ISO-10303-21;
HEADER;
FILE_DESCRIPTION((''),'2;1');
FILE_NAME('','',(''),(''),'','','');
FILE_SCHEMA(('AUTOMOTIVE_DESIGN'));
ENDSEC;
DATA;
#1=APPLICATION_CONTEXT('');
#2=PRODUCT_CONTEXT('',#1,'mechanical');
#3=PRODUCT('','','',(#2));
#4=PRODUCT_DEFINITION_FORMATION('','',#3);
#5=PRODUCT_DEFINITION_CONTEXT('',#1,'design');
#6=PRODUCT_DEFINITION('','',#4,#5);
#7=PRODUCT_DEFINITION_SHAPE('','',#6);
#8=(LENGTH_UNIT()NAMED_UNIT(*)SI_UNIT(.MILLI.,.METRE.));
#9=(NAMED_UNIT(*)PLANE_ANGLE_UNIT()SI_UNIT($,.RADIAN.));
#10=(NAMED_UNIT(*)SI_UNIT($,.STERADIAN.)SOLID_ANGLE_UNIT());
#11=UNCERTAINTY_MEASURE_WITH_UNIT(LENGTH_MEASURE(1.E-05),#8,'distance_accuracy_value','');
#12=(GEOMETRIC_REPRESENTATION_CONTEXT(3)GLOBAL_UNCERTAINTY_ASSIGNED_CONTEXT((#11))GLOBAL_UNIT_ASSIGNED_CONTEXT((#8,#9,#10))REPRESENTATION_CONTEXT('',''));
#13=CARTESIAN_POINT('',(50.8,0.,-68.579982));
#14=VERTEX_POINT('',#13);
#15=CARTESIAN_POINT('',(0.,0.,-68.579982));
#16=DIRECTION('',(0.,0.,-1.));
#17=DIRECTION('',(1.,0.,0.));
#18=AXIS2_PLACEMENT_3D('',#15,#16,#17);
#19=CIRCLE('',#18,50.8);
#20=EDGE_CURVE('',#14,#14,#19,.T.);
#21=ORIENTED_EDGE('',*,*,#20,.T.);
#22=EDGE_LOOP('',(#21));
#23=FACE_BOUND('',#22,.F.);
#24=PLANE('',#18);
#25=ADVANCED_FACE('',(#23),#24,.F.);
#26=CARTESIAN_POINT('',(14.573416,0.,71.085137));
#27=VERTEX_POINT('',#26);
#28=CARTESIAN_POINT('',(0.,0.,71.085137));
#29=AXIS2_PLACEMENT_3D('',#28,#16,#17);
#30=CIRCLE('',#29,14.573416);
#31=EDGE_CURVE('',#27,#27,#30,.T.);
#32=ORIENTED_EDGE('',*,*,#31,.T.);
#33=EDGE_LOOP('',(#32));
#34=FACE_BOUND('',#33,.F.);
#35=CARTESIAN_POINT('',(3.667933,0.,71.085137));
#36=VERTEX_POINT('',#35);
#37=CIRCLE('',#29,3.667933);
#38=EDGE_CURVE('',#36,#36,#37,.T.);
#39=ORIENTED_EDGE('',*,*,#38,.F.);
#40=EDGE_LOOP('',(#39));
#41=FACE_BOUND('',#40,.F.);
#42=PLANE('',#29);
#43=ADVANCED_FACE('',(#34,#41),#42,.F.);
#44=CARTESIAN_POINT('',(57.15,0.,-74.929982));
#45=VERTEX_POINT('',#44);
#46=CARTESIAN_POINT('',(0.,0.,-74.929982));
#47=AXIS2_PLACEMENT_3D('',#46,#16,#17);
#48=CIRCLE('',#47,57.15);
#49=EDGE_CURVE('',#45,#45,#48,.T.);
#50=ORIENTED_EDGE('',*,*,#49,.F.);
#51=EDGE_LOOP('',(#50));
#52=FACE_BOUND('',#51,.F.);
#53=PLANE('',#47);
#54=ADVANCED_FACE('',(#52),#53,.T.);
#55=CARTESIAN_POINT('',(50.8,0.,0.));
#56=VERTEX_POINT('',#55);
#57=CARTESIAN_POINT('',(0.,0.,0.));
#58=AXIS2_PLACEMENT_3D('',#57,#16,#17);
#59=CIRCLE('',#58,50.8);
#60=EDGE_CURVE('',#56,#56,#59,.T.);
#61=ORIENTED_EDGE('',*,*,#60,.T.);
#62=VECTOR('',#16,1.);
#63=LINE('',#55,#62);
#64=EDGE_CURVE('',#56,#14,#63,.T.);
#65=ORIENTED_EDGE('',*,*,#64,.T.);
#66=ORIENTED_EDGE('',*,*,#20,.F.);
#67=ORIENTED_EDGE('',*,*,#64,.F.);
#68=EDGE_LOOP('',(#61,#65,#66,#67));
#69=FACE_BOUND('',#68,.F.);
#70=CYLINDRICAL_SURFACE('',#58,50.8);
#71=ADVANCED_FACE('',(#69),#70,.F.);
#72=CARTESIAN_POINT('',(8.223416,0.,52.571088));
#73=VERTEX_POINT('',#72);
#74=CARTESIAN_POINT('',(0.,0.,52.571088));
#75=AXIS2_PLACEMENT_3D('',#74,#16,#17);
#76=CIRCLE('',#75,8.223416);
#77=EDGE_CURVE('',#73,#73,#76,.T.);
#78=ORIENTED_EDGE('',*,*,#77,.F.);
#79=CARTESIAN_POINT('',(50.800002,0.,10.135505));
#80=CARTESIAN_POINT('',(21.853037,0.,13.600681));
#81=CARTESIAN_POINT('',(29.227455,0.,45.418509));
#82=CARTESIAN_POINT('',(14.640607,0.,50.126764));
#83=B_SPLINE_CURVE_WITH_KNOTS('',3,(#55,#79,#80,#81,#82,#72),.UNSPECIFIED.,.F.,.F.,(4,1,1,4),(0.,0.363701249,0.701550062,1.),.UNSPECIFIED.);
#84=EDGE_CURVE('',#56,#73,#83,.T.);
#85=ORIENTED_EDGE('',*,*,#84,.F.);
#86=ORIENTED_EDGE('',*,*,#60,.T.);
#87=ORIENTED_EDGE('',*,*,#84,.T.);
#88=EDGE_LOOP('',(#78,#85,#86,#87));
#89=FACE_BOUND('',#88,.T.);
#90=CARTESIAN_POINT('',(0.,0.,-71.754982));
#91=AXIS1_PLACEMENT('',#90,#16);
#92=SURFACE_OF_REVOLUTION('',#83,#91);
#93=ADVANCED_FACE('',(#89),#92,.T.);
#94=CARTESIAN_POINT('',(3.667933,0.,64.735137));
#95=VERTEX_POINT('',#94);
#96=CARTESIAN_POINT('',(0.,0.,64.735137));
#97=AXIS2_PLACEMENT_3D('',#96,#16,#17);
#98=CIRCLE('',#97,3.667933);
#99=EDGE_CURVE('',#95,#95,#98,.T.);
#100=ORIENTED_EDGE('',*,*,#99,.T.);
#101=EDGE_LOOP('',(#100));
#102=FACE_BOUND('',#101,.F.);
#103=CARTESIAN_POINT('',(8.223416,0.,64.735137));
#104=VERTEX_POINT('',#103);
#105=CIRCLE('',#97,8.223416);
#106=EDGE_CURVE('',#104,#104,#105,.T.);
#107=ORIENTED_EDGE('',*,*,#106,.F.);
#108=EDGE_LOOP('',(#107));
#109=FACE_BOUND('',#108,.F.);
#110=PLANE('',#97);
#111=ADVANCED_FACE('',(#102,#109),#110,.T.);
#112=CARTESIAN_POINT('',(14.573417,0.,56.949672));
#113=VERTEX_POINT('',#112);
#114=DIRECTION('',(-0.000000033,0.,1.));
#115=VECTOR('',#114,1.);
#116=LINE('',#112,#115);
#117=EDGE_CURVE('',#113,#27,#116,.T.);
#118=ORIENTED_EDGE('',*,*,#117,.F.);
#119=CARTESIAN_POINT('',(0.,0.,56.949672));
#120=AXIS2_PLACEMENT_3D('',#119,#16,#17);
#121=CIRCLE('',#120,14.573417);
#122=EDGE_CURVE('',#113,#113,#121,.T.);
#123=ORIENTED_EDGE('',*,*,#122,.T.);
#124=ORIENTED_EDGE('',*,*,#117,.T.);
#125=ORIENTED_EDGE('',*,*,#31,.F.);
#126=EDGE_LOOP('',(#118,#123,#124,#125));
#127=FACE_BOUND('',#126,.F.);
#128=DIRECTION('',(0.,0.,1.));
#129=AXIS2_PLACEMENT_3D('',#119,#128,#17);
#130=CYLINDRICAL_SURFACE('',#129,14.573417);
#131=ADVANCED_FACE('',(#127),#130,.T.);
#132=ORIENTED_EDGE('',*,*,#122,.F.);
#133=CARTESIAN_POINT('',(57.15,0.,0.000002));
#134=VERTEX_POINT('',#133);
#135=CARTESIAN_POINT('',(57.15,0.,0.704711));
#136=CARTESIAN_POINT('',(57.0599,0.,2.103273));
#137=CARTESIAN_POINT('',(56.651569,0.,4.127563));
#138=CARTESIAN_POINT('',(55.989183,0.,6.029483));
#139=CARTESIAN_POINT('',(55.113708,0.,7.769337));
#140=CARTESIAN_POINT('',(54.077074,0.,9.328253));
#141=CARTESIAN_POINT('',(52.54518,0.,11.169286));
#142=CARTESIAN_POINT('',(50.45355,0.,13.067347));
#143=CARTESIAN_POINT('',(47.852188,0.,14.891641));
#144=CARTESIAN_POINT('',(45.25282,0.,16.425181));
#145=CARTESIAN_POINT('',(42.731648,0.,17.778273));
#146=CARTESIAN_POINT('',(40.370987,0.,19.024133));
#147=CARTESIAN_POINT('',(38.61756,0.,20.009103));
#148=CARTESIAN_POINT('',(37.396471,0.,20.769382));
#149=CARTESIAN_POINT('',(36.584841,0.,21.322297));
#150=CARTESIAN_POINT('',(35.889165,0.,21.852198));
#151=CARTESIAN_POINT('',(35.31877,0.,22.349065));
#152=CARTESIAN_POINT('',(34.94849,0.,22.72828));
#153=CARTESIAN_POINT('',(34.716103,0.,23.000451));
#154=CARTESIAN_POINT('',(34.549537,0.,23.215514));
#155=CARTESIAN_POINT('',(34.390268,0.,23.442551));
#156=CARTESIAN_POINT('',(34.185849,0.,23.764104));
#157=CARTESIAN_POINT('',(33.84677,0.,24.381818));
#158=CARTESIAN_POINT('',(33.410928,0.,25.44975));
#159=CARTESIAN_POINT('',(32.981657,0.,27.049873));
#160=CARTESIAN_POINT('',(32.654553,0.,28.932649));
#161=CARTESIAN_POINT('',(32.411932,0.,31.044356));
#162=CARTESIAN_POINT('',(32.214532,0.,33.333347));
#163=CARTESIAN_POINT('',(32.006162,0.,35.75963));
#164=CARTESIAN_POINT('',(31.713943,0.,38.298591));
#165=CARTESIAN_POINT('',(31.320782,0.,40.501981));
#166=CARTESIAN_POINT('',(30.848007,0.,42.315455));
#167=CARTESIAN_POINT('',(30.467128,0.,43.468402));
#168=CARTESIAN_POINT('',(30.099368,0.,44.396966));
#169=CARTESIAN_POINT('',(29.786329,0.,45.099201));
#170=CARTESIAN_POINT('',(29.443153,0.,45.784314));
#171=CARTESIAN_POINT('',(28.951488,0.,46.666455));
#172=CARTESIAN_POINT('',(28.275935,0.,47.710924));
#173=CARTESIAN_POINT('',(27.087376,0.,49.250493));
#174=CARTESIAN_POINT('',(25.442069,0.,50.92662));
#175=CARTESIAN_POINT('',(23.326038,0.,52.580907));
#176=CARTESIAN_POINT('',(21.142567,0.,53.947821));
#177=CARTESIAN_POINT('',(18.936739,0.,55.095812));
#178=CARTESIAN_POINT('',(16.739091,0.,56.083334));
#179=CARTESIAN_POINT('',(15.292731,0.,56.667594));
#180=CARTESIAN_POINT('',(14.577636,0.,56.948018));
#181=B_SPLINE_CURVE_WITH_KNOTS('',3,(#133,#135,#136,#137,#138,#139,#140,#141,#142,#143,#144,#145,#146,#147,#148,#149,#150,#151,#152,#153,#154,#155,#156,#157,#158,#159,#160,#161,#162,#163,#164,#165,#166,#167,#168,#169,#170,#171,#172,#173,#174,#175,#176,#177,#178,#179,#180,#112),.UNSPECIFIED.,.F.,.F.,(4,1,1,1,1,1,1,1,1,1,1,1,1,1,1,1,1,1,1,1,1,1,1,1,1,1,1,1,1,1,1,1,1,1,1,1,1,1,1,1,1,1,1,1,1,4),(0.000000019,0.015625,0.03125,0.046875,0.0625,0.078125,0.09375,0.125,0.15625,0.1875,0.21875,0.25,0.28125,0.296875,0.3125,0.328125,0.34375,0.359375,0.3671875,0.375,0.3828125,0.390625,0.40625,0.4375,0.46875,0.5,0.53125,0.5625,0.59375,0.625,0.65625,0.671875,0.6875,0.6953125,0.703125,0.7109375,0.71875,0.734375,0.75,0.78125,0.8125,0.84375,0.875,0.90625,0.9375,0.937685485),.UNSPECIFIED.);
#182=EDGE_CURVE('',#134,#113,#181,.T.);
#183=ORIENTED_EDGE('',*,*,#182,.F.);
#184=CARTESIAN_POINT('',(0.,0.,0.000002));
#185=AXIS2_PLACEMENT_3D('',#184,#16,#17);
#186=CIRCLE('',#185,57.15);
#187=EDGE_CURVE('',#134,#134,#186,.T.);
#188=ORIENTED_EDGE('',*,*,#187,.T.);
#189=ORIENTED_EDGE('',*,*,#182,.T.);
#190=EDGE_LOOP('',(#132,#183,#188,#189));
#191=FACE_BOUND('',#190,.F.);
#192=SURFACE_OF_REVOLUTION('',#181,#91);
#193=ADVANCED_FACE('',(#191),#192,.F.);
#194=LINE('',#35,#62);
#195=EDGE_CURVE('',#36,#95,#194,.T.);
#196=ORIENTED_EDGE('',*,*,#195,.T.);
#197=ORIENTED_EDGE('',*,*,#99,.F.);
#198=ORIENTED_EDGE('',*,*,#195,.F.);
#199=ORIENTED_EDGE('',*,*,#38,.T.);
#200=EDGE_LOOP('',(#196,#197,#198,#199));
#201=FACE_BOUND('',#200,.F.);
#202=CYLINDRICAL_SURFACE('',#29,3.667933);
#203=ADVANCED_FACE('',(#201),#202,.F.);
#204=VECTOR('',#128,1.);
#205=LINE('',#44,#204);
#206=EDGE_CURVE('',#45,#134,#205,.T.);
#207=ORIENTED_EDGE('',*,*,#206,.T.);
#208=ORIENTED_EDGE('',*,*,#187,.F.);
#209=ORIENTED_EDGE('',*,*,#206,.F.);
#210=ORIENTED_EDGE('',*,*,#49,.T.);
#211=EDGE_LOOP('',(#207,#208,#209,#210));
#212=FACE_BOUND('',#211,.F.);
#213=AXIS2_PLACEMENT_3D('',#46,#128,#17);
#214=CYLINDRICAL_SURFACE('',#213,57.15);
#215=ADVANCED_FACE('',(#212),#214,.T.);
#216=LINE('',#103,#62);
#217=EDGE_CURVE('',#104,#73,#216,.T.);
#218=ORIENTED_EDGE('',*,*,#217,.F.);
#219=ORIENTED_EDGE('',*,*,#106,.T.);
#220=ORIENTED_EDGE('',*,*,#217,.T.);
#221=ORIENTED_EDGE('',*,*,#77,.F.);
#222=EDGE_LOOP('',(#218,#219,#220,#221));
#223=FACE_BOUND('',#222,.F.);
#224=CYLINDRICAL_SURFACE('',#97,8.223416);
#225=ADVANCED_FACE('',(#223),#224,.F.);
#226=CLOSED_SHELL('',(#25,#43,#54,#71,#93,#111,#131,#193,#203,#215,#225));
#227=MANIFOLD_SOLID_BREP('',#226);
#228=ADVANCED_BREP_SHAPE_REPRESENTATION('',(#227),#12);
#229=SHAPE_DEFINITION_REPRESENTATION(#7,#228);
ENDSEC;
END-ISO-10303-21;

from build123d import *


# Not quite as in the source:
# - ends of sketch curves that miss each other by under 0.0002 mm in the source are joined
# - the dataset's text gives a spline's control points without its knots; the knots are read off the source's solid


with BuildPart() as f1:
    # F0 (on Front) → F1 (revolve)
    with BuildSketch(Plane.XZ):
        with BuildLine():
            Line((50.8, -68.5799818198), (0, -68.5799818198))
            Line((0, -68.5799818198), (0, -74.9299818198))
            Line((0, -74.9299818198), (57.15, -74.9299818198))
            Line((57.15, -74.9299818198), (57.15, 1.6272e-06))
            add(Edge.make_bspline(
                [(57.15, 1.6272e-06), (57.1499999994, 0.7047113918), (57.0598999162, 2.103273417), (56.6515693983, 4.1275628276), (55.9891831776, 6.0294834035), (55.1137080803, 7.7693366077), (54.0770742303, 9.3282529906), (52.5451803539, 11.1692858227), (50.4535495865, 13.0673465504), (47.8521882716, 14.8916410503), (45.252819746, 16.425180894), (42.7316484966, 17.7782729868), (40.3709871587, 19.0241328449), (38.6175601714, 20.0091031011), (37.3964709607, 20.7693815862), (36.5848410934, 21.3222974779), (35.889165019, 21.8521978188), (35.3187701783, 22.3490647419), (34.9484904994, 22.7282804416), (34.7161027204, 23.0004508821), (34.5495368253, 23.2155139733), (34.3902675999, 23.4425507333), (34.1858485185, 23.7641041974), (33.8467702825, 24.3818175191), (33.4109284532, 25.4497498628), (32.9816573877, 27.0498729284), (32.6545525856, 28.932648506), (32.411932376, 31.0443557544), (32.2145322917, 33.3333465292), (32.0061617084, 35.7596304469), (31.7139430509, 38.2985913452), (31.3207822666, 40.5019809383), (30.8480072544, 42.315454933), (30.4671278129, 43.4684021236), (30.0993683091, 44.3969660699), (29.7863286696, 45.0992011119), (29.4431534601, 45.7843141536), (28.9514880524, 46.6664553198), (28.2759351057, 47.710924054), (27.0873755974, 49.2504932123), (25.4420689363, 50.9266202701), (23.3260377998, 52.5809069603), (21.1425673416, 53.9478206558), (18.9367386048, 55.0958122319), (16.73909063, 56.0833338186), (15.292731043, 56.6675944469), (14.5776358142, 56.9480177287), (14.5734167567, 56.9496719276)],
                knots=[1.95e-08, 1.95e-08, 1.95e-08, 1.95e-08, 0.015625, 0.03125, 0.046875, 0.0625, 0.078125, 0.09375, 0.125, 0.15625, 0.1875, 0.21875, 0.25, 0.28125, 0.296875, 0.3125, 0.328125, 0.34375, 0.359375, 0.3671875, 0.375, 0.3828125, 0.390625, 0.40625, 0.4375, 0.46875, 0.5, 0.53125, 0.5625, 0.59375, 0.625, 0.65625, 0.671875, 0.6875, 0.6953125, 0.703125, 0.7109375, 0.71875, 0.734375, 0.75, 0.78125, 0.8125, 0.84375, 0.875, 0.90625, 0.9375, 0.9376854849, 0.9376854849, 0.9376854849, 0.9376854849], degree=3))
            Line((14.5734167567, 56.9496719276), (14.5734162837, 71.0851369262))
            Line((14.5734162837, 71.0851369262), (3.6679329351, 71.0851369262))
            Line((3.6679329351, 71.0851369262), (3.6679329351, 64.7351369262))
            Line((3.6679329351, 64.7351369262), (8.2234162837, 64.7351369262))
            Line((8.2234162837, 64.7351369262), (8.2234162837, 52.5710880756))
            add(Edge.make_bspline(
                [(50.8, 0), (50.8000016062, 10.1355050023), (21.8530368998, 13.6006812311), (29.227455035, 45.4185092323), (14.6406068987, 50.1267635615), (8.2234162837, 52.5710880756)],
                knots=[0, 0, 0, 0, 0.3637012491, 0.7015500616, 1, 1, 1, 1], degree=3))
            Line((50.8, 0), (50.8, -68.5799818198))
        make_face()
    revolve(axis=Axis((0, 0, -71.7549818198), (0, 0, -1)))


solid = f1.part
